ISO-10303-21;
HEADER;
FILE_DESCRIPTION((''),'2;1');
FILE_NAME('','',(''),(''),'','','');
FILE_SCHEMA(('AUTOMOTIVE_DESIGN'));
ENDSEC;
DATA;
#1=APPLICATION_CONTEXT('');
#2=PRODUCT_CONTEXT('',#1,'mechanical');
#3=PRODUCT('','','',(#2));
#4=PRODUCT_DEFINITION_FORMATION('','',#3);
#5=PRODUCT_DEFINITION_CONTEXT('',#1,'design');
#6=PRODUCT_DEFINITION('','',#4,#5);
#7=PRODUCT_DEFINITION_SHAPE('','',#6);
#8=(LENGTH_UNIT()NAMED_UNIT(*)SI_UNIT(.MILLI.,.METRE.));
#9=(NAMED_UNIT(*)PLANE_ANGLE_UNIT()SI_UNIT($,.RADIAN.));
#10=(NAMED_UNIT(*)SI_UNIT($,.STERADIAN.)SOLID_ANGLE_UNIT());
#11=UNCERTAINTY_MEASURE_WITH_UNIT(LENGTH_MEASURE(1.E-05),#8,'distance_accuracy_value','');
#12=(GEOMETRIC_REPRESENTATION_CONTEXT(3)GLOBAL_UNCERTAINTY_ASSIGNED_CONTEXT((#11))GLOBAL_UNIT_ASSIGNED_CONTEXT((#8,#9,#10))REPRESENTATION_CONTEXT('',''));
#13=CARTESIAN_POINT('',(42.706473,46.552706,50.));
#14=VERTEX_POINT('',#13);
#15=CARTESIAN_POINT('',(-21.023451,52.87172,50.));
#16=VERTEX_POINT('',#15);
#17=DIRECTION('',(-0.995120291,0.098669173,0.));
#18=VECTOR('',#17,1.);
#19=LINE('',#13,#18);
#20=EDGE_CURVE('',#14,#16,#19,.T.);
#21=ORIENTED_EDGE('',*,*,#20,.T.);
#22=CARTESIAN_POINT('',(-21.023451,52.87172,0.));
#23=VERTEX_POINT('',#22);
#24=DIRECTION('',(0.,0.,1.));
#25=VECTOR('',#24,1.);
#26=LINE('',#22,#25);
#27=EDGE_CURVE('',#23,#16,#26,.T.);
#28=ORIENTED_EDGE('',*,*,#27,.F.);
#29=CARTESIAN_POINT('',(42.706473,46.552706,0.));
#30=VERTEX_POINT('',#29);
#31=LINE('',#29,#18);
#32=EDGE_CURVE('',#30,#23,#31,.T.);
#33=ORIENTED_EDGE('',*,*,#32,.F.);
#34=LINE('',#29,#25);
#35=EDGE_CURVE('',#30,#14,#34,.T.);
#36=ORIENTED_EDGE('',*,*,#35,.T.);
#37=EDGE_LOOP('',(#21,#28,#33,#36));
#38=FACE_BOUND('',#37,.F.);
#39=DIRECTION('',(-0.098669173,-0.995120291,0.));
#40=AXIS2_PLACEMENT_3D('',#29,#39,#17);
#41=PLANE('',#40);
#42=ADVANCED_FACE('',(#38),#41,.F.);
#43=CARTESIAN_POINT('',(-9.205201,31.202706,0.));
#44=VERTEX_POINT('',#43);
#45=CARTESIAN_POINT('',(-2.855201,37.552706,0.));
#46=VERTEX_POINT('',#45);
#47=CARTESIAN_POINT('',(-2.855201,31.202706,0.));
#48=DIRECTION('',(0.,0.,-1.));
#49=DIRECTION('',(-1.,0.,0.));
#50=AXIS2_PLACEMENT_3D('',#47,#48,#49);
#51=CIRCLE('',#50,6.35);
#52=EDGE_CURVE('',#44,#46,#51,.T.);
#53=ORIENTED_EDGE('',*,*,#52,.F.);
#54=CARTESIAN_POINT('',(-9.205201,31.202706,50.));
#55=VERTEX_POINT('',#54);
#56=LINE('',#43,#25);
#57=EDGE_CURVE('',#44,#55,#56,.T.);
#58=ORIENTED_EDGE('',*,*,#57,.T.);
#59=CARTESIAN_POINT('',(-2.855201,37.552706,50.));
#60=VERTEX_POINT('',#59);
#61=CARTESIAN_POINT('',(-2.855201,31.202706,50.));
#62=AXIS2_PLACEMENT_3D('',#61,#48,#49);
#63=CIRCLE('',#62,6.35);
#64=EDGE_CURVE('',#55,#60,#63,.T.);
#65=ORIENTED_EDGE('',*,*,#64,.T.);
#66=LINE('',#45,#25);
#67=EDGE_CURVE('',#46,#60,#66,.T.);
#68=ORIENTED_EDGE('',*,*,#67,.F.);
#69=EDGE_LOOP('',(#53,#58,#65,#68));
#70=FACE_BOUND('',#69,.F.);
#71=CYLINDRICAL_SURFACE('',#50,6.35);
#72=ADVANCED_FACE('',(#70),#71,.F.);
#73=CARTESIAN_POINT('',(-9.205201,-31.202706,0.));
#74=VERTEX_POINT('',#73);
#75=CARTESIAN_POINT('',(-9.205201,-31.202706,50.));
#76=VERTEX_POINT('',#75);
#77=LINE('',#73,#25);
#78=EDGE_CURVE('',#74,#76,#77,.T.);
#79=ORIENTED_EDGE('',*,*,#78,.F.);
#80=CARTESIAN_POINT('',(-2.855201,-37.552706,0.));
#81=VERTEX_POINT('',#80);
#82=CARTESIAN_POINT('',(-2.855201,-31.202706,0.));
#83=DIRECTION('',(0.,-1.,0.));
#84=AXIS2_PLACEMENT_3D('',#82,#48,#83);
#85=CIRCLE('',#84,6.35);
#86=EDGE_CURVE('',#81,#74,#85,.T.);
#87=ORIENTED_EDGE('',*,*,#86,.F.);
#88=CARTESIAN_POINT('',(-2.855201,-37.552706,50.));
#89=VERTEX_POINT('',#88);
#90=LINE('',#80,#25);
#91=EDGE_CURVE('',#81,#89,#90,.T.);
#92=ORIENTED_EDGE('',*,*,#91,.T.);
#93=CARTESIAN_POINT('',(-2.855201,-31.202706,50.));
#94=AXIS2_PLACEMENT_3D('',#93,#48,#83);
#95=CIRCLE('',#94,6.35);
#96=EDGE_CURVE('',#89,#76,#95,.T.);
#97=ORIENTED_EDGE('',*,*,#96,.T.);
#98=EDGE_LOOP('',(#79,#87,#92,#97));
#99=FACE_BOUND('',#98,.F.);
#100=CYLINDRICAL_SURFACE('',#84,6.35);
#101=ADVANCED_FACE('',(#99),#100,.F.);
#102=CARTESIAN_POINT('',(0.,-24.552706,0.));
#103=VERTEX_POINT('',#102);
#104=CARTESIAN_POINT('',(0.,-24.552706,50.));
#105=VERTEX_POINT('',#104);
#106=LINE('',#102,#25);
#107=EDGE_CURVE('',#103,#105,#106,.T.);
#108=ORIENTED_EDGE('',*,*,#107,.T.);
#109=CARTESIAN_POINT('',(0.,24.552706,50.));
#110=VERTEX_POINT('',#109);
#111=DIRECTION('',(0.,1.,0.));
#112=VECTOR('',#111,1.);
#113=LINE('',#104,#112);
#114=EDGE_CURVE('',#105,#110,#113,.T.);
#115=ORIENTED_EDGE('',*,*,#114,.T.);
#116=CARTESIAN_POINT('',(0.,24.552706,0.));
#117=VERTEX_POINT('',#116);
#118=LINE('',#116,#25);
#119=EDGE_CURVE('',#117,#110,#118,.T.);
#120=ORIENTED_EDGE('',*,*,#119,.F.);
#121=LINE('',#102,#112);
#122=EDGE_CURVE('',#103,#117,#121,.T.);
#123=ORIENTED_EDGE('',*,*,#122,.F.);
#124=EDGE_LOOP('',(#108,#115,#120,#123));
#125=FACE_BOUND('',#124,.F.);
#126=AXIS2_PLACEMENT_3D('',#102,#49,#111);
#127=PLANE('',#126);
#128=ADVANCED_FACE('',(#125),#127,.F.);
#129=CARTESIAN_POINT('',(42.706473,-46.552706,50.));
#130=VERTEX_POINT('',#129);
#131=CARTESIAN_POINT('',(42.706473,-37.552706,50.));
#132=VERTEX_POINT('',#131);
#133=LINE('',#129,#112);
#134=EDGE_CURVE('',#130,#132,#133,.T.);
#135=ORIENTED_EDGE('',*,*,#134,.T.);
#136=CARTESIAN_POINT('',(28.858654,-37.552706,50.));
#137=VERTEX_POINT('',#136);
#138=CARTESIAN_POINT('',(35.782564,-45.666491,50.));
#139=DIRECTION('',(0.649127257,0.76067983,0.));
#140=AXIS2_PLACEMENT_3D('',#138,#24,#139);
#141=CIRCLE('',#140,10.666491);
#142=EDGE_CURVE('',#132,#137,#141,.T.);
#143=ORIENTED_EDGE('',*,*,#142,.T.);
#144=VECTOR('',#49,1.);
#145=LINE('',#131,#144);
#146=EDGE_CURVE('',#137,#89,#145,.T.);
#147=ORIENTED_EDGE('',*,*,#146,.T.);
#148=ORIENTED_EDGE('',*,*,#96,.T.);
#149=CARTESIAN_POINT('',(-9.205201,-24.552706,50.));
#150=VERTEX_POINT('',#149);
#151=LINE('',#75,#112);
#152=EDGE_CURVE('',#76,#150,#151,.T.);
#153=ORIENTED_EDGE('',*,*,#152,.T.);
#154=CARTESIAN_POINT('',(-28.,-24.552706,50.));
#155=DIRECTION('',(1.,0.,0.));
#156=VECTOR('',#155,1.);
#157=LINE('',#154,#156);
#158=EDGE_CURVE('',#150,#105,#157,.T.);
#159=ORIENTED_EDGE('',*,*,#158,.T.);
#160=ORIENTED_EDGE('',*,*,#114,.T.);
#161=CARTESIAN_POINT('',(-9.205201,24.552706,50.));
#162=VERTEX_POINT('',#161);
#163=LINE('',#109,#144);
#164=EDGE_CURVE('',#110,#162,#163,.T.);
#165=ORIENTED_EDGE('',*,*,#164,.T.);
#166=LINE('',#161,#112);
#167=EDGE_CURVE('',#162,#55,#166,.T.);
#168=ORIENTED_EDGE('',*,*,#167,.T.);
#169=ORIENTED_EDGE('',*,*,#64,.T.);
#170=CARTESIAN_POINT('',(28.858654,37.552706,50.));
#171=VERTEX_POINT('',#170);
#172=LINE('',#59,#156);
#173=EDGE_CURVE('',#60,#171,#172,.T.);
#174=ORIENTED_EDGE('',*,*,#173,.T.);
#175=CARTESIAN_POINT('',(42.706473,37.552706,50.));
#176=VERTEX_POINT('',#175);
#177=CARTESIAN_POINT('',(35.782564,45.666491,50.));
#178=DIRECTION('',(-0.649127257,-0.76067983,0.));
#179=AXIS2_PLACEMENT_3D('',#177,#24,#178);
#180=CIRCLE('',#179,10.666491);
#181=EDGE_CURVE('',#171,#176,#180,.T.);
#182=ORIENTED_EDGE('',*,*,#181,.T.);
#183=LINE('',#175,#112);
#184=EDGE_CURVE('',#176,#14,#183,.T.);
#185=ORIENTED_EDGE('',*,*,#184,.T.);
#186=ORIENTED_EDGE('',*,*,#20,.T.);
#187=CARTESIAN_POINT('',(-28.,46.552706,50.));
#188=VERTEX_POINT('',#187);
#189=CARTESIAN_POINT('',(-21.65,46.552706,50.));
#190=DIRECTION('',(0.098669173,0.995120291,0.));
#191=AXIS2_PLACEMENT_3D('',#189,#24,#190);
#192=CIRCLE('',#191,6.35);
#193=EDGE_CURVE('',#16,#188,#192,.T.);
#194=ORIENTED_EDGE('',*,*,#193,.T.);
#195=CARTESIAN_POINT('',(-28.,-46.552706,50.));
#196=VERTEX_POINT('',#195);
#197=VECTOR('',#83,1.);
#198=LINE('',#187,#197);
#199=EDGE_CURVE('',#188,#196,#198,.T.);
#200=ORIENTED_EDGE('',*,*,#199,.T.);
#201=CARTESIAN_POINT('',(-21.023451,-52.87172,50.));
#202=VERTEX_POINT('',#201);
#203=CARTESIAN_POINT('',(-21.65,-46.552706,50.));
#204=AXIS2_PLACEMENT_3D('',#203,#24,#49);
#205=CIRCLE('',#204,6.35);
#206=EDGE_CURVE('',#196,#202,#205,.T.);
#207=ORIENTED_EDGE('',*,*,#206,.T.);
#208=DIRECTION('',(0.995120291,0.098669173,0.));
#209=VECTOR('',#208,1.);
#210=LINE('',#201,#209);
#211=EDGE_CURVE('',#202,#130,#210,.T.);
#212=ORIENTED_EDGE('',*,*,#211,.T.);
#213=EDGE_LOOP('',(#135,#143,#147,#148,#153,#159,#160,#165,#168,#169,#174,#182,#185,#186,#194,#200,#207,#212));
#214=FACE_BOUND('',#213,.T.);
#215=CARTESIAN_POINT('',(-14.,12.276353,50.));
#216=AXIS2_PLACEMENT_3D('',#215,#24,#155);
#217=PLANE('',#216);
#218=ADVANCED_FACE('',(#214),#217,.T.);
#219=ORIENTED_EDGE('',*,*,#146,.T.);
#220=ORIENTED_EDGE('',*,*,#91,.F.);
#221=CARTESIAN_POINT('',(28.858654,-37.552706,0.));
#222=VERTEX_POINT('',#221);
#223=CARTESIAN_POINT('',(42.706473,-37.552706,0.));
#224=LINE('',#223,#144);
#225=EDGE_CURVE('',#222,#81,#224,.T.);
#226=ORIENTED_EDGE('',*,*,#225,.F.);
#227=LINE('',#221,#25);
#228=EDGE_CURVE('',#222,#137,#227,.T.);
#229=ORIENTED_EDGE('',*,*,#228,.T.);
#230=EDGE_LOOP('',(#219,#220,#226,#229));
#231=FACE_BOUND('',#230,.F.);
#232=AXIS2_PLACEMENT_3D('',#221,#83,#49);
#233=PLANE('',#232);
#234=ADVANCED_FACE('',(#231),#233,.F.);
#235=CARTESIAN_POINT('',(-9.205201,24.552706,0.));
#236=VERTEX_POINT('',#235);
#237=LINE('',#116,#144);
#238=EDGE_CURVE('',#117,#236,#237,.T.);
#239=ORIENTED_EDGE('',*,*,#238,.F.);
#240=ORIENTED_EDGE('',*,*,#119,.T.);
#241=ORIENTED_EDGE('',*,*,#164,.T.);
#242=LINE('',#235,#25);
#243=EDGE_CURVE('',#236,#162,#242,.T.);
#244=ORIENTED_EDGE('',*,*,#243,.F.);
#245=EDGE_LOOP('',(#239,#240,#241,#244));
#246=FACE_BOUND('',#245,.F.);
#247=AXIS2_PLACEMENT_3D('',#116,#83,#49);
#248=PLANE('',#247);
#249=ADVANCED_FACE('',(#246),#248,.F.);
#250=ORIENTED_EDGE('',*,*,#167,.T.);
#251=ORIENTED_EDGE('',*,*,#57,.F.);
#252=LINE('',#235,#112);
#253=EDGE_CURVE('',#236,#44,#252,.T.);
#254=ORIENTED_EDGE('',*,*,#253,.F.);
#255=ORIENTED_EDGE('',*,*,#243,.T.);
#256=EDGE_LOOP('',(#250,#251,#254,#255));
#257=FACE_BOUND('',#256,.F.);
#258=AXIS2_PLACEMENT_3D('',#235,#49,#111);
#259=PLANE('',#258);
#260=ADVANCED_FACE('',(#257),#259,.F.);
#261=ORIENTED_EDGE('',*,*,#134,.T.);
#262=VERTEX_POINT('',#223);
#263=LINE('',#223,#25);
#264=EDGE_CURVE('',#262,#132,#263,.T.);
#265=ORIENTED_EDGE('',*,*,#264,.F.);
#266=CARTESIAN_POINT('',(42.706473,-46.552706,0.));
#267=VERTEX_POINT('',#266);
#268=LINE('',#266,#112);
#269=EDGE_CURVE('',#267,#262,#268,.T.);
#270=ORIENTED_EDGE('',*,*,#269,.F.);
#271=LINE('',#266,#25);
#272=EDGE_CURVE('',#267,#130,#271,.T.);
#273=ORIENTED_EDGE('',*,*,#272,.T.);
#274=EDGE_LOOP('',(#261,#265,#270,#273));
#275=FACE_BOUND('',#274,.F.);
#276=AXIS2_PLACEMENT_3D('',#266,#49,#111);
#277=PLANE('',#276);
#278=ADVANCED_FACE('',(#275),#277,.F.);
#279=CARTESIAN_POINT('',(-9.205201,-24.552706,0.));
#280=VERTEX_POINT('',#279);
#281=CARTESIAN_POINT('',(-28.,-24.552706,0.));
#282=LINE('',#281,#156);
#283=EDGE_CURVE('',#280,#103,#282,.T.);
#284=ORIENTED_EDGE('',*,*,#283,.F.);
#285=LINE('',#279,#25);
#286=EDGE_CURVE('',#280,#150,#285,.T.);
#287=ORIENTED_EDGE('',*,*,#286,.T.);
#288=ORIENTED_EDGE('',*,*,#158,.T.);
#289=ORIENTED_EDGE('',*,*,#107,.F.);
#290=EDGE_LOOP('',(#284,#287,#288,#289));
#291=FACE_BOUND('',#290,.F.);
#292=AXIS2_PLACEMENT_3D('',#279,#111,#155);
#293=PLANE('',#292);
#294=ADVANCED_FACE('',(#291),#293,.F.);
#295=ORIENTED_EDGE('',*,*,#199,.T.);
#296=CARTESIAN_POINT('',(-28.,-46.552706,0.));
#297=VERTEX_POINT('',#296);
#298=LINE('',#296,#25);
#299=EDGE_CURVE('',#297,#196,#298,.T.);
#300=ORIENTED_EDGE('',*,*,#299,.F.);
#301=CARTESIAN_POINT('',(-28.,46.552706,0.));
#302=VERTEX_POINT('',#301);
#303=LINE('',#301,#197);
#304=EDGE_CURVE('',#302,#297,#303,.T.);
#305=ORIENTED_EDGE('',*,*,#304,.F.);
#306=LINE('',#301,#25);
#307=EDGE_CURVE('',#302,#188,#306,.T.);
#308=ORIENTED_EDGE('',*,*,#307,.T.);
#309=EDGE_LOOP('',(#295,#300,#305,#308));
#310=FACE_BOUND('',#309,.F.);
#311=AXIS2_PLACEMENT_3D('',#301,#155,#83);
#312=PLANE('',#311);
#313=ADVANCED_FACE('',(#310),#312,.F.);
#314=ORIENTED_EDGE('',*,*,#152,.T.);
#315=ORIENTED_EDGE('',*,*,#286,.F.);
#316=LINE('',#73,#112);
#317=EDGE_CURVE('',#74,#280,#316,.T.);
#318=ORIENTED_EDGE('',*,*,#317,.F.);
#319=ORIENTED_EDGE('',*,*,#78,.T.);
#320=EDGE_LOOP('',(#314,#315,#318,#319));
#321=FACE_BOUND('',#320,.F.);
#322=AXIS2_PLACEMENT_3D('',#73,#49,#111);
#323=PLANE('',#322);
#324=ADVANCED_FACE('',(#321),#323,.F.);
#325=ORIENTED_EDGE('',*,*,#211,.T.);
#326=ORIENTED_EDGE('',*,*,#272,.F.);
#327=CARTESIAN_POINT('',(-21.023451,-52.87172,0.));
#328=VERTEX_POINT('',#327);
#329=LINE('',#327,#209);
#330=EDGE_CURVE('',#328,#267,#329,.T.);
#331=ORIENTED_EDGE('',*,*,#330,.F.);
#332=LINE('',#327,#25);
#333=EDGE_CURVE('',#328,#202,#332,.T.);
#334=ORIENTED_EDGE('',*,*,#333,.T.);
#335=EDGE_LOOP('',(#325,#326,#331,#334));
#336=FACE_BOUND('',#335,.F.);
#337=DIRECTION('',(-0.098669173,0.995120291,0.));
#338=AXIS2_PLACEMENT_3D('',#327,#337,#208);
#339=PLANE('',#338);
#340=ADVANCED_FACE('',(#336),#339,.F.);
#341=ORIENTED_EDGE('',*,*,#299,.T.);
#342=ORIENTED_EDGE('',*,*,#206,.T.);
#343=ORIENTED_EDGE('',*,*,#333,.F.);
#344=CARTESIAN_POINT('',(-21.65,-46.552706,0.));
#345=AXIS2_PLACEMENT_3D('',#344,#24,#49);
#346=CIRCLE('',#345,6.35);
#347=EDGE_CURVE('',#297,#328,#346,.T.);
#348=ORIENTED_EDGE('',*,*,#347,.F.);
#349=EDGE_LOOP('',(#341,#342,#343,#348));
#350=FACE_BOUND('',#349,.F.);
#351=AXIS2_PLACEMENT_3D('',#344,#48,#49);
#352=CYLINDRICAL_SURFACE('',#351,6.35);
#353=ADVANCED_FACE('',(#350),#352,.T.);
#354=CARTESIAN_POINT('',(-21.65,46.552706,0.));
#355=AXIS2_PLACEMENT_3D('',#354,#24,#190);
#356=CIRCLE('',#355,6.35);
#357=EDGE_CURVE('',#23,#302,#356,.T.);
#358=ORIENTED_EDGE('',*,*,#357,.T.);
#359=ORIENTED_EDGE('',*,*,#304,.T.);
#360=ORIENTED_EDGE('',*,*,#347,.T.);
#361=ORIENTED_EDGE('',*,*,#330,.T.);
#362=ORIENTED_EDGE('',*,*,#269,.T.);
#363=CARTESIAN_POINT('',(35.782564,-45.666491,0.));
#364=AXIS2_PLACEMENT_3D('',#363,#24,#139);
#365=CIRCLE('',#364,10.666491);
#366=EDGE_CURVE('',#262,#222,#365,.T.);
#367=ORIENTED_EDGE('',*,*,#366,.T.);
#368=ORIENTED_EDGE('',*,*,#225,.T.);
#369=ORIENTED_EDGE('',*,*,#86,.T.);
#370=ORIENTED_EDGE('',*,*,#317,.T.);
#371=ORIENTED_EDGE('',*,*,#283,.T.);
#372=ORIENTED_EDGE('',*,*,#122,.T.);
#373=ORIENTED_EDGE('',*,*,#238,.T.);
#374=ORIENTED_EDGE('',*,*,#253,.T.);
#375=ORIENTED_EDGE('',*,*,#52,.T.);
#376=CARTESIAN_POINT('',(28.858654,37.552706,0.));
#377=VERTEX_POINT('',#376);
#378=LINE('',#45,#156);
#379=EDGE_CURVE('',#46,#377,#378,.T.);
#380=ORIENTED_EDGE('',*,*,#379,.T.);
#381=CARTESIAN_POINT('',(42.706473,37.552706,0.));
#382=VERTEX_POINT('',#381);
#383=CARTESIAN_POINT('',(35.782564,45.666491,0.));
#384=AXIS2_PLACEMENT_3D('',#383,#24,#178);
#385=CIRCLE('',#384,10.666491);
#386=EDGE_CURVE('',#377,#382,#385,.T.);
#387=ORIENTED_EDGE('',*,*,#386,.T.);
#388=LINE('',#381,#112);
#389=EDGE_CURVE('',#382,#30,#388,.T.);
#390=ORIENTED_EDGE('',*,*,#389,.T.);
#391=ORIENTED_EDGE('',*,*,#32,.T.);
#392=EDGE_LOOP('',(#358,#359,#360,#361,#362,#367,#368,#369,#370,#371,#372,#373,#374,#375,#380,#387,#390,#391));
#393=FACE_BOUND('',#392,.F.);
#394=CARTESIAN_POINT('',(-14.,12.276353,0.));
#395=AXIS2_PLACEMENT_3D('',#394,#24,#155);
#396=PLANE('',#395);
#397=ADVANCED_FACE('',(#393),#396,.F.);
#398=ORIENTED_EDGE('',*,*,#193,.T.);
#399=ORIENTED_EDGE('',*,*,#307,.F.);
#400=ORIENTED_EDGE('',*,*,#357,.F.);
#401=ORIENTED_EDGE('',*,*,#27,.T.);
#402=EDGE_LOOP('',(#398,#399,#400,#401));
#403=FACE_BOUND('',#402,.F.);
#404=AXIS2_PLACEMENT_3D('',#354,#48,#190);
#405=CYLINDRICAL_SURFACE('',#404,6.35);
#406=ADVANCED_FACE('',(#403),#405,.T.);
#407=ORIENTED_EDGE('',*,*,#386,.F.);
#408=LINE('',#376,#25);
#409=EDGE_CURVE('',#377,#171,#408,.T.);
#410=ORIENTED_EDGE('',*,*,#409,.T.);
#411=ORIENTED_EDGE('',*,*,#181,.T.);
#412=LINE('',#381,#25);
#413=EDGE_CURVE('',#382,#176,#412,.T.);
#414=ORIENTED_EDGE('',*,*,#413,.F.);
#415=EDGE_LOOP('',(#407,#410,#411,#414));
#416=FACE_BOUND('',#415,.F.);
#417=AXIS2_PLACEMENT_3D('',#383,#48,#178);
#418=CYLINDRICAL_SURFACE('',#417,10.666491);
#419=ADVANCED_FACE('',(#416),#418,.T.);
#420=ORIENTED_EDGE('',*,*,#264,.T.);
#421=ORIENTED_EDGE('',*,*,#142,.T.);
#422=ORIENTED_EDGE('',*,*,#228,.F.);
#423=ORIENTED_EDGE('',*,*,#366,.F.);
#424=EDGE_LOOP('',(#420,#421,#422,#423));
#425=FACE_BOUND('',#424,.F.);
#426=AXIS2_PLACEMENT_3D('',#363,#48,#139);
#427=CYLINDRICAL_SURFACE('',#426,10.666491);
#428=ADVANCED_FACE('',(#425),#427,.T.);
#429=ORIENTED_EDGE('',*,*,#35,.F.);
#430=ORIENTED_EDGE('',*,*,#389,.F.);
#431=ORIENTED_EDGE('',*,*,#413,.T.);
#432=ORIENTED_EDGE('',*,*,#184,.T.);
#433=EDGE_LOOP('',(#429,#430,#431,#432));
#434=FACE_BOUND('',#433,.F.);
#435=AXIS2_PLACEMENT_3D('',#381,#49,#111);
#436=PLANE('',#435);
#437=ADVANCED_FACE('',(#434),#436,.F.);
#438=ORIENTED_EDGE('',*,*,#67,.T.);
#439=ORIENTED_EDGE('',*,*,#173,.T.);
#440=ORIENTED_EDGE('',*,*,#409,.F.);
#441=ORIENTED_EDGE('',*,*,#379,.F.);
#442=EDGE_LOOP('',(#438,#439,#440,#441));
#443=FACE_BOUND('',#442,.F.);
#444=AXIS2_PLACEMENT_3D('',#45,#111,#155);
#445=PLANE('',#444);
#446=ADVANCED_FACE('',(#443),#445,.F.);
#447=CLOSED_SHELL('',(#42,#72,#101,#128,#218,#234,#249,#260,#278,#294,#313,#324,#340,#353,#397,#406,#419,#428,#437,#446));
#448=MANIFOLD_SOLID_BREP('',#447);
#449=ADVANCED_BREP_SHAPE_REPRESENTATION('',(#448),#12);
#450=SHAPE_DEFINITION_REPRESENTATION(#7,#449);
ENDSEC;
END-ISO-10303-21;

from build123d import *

# Parameters (mm, degrees)
F1_DEPTH = 50


# Not quite as in the source:
# - a feature names something its author has since deleted; it is built from what else it names


with BuildPart() as f1:
    # F0 (on Top) → F1 (new body)
    with BuildSketch(Plane.XY):
        Polygon((-28, 24.552706346), (-28, 0), (0, 0), (0, 24.552706346), (-9.2052005051, 24.552706346), align=None)
        with BuildLine():
            Line((-28, 46.552706346), (-28, 24.552706346))
            Line((-28, 24.552706346), (-9.2052005051, 24.552706346))
            Line((-9.2052005051, 24.552706346), (-9.2052005051, 31.202706346))
            ThreePointArc((-9.2052005051, 31.202706346), (-7.3453285656, 35.6928344065), (-2.8552005051, 37.552706346))
            Line((-2.8552005051, 37.552706346), (28.8586538925, 37.552706346))
            Line((28.8586538925, 37.552706346), (42.7064734879, 37.552706346))
            Line((42.7064734879, 37.552706346), (42.7064734879, 46.552706346))
            Line((42.7064734879, 46.552706346), (-28, 46.552706346))
        make_face()
        with BuildLine():
            ThreePointArc((28.8586538925, 37.552706346), (35.7825636902, 35), (42.7064734879, 37.552706346))
            Line((42.7064734879, 37.552706346), (28.8586538925, 37.552706346))
        make_face()
        with BuildLine():
            ThreePointArc((-21.0234507531, 52.8717201964), (-25.9128577435, 51.2591427749), (-28, 46.552706346))
            Line((-28, 46.552706346), (42.7064734879, 46.552706346))
            Line((42.7064734879, 46.552706346), (-21.0234507531, 52.8717201964))
        make_face()
        Polygon((0, 0), (-28, 0), (-28, -24.552706346), (-9.2052005051, -24.552706346), (0, -24.552706346), align=None)
        with BuildLine():
            Line((-9.2052005051, -24.552706346), (-28, -24.552706346))
            Line((-28, -24.552706346), (-28, -46.552706346))
            Line((-28, -46.552706346), (42.7064734879, -46.552706346))
            Line((42.7064734879, -46.552706346), (42.7064734879, -37.552706346))
            Line((42.7064734879, -37.552706346), (28.8586538925, -37.552706346))
            Line((28.8586538925, -37.552706346), (-2.8552005051, -37.552706346))
            ThreePointArc((-2.8552005051, -37.552706346), (-7.3453285656, -35.6928344065), (-9.2052005051, -31.202706346))
            Line((-9.2052005051, -31.202706346), (-9.2052005051, -24.552706346))
        make_face()
        with BuildLine():
            Line((42.7064734879, -46.552706346), (-28, -46.552706346))
            ThreePointArc((-28, -46.552706346), (-25.9128577435, -51.2591427749), (-21.0234507531, -52.8717201964))
            Line((-21.0234507531, -52.8717201964), (42.7064734879, -46.552706346))
        make_face()
        with BuildLine():
            Line((28.8586538925, -37.552706346), (42.7064734879, -37.552706346))
            ThreePointArc((42.7064734879, -37.552706346), (35.7825636902, -35), (28.8586538925, -37.552706346))
        make_face()
    extrude(amount=F1_DEPTH)


solid = f1.part
